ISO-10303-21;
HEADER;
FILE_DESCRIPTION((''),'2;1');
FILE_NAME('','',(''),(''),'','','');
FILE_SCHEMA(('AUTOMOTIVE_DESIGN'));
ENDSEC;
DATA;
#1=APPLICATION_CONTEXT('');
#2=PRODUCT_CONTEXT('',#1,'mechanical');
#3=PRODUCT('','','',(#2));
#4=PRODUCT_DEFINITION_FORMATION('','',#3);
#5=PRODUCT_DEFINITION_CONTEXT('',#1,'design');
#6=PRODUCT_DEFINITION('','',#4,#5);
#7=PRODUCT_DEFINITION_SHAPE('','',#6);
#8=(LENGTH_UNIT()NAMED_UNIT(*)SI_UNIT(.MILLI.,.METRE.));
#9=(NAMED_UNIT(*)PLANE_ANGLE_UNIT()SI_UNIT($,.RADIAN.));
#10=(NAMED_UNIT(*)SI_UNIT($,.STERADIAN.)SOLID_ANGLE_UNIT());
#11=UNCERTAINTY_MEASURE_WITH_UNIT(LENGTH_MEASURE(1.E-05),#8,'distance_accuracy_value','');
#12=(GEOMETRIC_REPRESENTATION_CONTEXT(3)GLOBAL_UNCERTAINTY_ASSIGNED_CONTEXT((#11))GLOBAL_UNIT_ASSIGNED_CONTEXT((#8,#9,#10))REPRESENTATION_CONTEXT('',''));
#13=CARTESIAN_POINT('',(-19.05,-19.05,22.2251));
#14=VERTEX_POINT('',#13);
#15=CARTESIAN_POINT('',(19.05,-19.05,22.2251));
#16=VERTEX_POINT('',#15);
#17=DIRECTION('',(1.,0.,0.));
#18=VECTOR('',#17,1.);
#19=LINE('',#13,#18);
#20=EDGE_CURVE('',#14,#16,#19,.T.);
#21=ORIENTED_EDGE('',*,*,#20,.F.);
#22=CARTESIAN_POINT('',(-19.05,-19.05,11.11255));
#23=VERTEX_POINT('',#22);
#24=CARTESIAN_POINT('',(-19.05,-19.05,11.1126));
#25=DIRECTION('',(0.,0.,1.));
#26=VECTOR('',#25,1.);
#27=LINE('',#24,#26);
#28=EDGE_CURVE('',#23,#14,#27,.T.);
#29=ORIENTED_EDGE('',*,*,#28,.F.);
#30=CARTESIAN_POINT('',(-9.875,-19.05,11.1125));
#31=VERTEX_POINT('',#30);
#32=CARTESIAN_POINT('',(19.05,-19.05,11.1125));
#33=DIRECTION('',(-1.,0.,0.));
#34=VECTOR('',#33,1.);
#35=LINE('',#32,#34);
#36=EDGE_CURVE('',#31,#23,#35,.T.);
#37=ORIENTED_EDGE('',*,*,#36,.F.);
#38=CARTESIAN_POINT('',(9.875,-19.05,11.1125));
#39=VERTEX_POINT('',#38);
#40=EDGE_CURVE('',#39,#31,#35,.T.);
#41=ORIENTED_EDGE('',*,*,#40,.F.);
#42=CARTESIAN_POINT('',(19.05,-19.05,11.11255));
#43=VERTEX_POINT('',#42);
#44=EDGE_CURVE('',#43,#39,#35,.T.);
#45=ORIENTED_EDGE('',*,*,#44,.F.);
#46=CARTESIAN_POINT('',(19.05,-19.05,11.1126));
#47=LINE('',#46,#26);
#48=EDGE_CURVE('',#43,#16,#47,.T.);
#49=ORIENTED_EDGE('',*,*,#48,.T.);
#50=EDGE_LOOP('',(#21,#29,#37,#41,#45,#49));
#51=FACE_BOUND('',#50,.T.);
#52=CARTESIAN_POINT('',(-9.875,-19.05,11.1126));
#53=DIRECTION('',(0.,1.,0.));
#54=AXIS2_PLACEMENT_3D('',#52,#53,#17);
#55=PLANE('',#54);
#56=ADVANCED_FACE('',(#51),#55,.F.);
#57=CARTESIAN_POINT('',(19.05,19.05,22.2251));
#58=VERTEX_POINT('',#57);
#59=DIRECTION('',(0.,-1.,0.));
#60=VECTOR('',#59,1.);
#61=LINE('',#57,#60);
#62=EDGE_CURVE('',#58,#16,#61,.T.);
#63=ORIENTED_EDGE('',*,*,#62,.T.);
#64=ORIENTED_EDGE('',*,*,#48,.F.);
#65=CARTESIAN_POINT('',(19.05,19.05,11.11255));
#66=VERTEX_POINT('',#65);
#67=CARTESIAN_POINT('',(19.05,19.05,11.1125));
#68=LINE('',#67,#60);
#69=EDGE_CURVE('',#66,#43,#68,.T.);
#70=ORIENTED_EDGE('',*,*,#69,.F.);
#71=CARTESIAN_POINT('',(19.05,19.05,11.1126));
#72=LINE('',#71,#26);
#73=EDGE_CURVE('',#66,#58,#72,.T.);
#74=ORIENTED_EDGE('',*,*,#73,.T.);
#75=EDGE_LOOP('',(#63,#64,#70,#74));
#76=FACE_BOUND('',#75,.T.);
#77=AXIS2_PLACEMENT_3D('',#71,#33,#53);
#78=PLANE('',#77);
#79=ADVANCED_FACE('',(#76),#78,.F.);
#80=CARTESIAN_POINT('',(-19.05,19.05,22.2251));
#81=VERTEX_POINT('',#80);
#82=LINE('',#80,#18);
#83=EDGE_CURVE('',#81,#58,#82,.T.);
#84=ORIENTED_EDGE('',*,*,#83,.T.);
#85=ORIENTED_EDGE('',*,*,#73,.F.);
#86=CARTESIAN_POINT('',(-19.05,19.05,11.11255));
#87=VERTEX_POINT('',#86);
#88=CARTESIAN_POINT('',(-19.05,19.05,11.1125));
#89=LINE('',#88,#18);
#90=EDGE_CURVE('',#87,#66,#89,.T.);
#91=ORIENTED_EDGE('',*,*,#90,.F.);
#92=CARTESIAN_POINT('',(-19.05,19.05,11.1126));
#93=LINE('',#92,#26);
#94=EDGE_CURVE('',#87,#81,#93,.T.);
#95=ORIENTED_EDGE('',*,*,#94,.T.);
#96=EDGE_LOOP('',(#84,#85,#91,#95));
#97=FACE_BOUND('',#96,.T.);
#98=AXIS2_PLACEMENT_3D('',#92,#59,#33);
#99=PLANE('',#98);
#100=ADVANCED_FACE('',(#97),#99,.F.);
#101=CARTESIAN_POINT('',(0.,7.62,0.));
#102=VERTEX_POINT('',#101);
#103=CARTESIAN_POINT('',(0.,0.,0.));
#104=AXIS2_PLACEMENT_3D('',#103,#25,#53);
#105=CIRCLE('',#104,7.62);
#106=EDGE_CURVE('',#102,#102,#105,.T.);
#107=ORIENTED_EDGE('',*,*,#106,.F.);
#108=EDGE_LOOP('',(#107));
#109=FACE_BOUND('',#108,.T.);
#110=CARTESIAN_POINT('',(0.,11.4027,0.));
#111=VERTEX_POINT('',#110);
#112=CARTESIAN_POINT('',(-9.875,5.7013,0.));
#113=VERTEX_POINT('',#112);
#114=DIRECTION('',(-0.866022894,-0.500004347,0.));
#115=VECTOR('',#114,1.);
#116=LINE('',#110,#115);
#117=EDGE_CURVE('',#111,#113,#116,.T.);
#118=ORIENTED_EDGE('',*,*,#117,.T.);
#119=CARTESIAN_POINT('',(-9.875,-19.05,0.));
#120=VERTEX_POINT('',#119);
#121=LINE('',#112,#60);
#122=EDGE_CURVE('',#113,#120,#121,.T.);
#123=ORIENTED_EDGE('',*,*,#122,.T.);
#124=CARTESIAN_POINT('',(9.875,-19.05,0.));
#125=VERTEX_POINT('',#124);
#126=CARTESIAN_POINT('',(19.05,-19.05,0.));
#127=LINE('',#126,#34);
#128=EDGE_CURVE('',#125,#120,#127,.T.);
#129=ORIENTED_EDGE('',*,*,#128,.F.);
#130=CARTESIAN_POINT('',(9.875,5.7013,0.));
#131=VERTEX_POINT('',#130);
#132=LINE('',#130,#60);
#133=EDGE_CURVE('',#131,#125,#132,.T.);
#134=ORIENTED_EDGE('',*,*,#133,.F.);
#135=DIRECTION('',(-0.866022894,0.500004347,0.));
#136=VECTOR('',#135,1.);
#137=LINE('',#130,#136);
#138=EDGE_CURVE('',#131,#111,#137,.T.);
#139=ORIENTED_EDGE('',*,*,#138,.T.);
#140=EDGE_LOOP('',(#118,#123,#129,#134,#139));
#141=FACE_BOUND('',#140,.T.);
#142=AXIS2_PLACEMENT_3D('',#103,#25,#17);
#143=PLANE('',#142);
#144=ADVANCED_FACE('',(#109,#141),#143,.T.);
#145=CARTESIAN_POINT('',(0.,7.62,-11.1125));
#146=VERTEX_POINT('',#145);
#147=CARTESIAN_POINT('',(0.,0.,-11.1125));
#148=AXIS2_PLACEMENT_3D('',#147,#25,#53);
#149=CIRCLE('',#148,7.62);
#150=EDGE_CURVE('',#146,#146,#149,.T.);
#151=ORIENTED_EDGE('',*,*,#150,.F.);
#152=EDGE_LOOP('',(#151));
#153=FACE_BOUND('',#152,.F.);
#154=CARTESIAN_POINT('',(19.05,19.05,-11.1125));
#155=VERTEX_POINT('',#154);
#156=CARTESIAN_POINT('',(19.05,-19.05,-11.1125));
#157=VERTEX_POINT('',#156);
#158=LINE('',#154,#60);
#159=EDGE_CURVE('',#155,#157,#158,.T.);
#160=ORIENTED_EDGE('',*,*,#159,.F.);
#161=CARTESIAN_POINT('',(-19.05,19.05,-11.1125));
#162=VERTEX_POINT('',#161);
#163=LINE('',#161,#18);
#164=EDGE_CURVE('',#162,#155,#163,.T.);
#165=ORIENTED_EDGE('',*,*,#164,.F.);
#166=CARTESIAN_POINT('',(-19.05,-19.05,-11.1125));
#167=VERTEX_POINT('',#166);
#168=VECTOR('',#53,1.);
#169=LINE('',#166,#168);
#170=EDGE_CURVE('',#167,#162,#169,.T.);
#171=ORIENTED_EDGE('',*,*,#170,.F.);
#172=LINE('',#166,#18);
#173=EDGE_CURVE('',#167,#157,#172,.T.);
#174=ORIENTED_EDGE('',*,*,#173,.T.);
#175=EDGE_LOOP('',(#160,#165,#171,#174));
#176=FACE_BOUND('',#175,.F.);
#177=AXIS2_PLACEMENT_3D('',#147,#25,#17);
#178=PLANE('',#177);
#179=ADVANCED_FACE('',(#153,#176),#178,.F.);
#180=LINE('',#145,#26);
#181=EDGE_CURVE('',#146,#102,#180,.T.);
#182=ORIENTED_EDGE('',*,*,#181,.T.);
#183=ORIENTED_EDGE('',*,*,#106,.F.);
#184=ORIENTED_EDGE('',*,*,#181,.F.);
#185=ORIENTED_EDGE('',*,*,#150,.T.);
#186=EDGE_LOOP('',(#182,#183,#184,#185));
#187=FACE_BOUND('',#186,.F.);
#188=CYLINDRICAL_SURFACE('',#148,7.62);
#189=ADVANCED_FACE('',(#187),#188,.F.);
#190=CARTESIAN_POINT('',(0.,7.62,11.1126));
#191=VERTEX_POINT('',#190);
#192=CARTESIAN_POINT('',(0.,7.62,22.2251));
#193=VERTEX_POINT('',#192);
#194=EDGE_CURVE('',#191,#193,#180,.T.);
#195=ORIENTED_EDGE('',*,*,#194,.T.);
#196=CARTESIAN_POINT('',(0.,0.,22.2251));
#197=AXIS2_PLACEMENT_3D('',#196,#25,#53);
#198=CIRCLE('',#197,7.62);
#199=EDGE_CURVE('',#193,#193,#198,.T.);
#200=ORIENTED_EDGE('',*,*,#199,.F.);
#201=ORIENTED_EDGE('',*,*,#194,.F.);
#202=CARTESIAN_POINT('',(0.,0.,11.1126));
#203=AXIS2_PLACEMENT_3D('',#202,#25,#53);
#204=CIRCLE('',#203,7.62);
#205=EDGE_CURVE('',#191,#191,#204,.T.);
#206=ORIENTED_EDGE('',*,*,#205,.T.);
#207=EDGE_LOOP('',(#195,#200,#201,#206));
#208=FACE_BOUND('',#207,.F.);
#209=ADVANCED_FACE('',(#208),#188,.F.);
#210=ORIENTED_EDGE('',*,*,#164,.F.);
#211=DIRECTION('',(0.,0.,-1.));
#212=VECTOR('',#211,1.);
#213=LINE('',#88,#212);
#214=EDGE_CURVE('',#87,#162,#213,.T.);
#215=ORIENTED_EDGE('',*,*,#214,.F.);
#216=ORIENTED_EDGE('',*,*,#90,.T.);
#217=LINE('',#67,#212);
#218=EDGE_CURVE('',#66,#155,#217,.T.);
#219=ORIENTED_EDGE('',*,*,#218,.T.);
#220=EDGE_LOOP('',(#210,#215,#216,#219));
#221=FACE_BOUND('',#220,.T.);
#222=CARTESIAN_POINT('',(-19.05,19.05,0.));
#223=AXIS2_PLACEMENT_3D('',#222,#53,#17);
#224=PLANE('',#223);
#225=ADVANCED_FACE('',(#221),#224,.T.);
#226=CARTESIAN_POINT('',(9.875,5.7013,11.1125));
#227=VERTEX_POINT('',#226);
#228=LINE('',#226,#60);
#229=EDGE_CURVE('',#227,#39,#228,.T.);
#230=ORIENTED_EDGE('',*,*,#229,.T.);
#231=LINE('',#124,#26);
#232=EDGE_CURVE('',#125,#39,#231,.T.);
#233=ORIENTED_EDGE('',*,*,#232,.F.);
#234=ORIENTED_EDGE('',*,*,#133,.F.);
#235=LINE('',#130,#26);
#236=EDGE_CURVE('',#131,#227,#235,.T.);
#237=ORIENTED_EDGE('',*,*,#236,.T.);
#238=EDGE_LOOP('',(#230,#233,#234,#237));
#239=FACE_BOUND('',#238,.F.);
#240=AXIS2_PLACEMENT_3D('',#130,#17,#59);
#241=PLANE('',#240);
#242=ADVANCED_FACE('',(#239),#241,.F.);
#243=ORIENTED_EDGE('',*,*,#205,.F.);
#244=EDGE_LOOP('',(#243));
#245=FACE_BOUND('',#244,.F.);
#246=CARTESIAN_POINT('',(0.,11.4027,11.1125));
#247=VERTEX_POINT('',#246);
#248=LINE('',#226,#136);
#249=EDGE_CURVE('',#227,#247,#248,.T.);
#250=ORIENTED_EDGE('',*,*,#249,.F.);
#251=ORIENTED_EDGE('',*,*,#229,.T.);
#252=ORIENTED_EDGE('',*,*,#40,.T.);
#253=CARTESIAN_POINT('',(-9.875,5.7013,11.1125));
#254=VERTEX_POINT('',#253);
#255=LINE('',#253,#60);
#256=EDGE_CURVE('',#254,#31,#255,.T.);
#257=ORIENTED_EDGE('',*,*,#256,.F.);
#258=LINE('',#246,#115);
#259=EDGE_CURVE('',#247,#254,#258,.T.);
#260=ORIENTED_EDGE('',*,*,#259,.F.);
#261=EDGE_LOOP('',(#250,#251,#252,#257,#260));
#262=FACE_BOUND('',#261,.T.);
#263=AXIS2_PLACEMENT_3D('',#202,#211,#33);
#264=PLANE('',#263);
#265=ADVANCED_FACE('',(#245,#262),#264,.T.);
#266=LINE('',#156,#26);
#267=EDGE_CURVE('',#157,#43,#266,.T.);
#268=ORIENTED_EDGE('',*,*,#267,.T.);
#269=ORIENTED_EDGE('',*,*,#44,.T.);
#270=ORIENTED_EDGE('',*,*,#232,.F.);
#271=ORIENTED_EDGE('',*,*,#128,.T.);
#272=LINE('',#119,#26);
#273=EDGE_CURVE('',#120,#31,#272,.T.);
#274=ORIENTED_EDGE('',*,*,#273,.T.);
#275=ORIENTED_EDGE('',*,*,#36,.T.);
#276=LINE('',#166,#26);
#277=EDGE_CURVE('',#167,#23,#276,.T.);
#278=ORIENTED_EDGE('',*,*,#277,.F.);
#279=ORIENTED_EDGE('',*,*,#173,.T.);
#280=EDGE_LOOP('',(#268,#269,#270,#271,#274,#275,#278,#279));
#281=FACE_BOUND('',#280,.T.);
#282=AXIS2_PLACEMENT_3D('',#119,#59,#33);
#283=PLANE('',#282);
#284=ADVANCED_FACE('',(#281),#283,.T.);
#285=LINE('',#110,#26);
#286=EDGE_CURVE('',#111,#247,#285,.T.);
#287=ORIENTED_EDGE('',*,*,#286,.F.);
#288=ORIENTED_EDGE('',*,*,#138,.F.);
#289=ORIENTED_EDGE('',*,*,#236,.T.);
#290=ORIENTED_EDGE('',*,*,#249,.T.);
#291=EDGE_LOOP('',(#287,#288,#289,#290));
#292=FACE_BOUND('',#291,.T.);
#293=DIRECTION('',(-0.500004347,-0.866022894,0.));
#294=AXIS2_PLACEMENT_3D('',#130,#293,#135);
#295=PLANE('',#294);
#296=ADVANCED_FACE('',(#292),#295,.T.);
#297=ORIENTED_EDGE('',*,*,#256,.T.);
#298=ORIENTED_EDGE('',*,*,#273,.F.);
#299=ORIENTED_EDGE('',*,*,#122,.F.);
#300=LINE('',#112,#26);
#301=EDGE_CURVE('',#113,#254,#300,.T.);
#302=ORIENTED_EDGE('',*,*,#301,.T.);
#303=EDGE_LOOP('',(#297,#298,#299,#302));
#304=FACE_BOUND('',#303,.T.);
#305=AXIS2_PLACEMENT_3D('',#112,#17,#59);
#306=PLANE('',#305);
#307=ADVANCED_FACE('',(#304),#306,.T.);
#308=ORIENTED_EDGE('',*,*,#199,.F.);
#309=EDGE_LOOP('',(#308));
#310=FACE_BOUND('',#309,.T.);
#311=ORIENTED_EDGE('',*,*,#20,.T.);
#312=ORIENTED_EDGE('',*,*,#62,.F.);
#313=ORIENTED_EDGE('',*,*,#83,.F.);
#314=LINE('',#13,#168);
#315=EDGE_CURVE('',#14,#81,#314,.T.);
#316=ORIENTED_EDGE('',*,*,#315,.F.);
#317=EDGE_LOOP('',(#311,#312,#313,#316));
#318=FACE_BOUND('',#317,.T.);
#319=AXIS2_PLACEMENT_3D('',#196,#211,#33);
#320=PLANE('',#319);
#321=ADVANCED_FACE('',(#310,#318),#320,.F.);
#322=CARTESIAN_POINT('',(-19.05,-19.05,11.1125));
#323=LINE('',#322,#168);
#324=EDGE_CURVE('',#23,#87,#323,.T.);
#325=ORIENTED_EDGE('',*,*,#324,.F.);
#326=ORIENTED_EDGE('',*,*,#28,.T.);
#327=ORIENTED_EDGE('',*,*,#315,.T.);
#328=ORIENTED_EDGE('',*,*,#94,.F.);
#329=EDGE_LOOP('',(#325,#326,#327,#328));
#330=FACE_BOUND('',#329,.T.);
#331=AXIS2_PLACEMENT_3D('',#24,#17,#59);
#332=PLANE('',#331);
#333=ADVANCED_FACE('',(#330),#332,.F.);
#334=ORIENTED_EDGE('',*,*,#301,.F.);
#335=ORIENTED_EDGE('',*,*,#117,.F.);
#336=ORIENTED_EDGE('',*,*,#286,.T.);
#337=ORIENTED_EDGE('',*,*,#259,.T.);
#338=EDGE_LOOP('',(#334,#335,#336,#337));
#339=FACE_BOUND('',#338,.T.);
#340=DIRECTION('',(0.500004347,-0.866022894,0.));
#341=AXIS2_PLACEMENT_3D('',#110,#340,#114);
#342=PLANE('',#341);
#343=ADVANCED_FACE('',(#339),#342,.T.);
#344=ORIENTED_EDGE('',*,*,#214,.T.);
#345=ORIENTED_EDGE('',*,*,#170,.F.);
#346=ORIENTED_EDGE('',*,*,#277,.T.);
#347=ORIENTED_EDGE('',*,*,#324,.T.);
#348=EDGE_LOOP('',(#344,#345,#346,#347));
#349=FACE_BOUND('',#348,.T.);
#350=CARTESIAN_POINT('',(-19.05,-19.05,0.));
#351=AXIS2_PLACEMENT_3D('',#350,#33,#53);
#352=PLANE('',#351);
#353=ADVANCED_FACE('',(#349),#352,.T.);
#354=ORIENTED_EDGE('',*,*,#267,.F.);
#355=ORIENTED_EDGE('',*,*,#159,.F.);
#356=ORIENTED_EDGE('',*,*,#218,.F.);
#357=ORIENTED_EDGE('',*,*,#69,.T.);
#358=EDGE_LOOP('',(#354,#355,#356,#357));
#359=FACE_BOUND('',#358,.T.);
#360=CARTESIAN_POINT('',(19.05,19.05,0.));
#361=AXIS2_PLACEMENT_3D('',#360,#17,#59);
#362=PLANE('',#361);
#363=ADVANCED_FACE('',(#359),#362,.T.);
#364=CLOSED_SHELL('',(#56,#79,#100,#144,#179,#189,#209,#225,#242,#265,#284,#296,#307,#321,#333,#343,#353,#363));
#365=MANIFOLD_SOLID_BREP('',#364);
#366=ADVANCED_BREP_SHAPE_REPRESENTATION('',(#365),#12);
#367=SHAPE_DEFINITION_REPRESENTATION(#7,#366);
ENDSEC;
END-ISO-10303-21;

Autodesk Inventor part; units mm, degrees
ref_plane "YZ Plane" through (0, 0, 0) normal (1, 0, 0) x (0, 1, 0)
ref_plane "XZ Plane" through (0, 0, 0) normal (0, 1, 0) x (-1, 0, 0)
sketch "Sketch1" plane through (0, 0, 0) normal (0, 0, 1) x (1, 0, 0)
  line L0 (0, -10.9985) -> (-9.525, -5.4993)
  line L1 (-9.525, -5.4993) -> (-9.525, 5.4993)
  line L2 (-9.525, 5.4993) -> (0, 10.9985)
  line L3 (0, 10.9985) -> (9.525, 5.4993)
  line L4 (9.525, 5.4993) -> (9.525, -5.4993)
  line L5 (9.525, -5.4993) -> (0, -10.9985)
  point P0 (0, 0)
  point P1 (0, 0)
  dimension "d0" = 19.05
  dimension "d1" = 21.9971
sketch "Sketch2" plane through (0, 0, 0) normal (0, 0, 1) x (1, 0, 0)
  line L0 (-19.05, -19.05) -> (-19.05, 19.05)
  line L1 (-19.05, 19.05) -> (19.05, 19.05)
  line L2 (19.05, 19.05) -> (19.05, -19.05)
  line L3 (19.05, -19.05) -> (-19.05, -19.05)
  circle A0 centre (0, 0) radius 6.35 construction
  circle A1 centre (0, 0) radius 6.35 construction
  line L4 (0, -10.9985) -> (-9.525, -5.4993) construction
  line L5 (-9.525, -5.4993) -> (-9.525, 5.4993) construction
  line L6 (-9.525, 5.4993) -> (0, 10.9985) construction
  line L7 (0, 10.9985) -> (9.525, 5.4993) construction
  line L8 (9.525, 5.4993) -> (9.525, -5.4993) construction
  line L9 (9.525, -5.4993) -> (0, -10.9985) construction
  line L10 (0, 11.4027) -> (-9.875, 5.7013)
  line L11 (-9.875, 5.7013) -> (-9.875, -5.7013) construction
  line L12 (-9.875, -5.7013) -> (0, -11.4027) construction
  line L13 (0, -11.4027) -> (9.875, -5.7013) construction
  line L14 (9.875, -5.7013) -> (9.875, 5.7013) construction
  line L15 (9.875, 5.7013) -> (0, 11.4027)
  line L16 (-9.875, 5.7013) -> (-9.875, -19.05)
  line L17 (9.875, 5.7013) -> (9.875, -19.05)
  dimension "d11" = 38.1
  dimension "d12" = 0.35
extrude "Extrusion2" add sketch "Sketch2" along normal blind 11.1125 contours L0 L1 L2 L3 L17 L15 L10 L16
extrude "Extrusion4" add sketch "Sketch2" against normal blind 11.1125
ref_plane "Work Plane1" through (0, 0, 5.5563) normal (0, 0, 1) x (1, 0, 0)
mirror "Mirror1" about plane through (0, 0, 5.5563) normal (0, 0, 1) of "Extrusion4"
sketch "Sketch4" plane through (0, 0, -11.1125) normal (0, 0, -1) x (-1, 0, 0)
  point P0 (0, 0)
hole "Hole2" at (0, 0, -11.1125) direction (0, 0, 1) diameter 15.24 end through all
equation "\"d11\" = 2 * d0"
properties part number "halfinchNUT"
